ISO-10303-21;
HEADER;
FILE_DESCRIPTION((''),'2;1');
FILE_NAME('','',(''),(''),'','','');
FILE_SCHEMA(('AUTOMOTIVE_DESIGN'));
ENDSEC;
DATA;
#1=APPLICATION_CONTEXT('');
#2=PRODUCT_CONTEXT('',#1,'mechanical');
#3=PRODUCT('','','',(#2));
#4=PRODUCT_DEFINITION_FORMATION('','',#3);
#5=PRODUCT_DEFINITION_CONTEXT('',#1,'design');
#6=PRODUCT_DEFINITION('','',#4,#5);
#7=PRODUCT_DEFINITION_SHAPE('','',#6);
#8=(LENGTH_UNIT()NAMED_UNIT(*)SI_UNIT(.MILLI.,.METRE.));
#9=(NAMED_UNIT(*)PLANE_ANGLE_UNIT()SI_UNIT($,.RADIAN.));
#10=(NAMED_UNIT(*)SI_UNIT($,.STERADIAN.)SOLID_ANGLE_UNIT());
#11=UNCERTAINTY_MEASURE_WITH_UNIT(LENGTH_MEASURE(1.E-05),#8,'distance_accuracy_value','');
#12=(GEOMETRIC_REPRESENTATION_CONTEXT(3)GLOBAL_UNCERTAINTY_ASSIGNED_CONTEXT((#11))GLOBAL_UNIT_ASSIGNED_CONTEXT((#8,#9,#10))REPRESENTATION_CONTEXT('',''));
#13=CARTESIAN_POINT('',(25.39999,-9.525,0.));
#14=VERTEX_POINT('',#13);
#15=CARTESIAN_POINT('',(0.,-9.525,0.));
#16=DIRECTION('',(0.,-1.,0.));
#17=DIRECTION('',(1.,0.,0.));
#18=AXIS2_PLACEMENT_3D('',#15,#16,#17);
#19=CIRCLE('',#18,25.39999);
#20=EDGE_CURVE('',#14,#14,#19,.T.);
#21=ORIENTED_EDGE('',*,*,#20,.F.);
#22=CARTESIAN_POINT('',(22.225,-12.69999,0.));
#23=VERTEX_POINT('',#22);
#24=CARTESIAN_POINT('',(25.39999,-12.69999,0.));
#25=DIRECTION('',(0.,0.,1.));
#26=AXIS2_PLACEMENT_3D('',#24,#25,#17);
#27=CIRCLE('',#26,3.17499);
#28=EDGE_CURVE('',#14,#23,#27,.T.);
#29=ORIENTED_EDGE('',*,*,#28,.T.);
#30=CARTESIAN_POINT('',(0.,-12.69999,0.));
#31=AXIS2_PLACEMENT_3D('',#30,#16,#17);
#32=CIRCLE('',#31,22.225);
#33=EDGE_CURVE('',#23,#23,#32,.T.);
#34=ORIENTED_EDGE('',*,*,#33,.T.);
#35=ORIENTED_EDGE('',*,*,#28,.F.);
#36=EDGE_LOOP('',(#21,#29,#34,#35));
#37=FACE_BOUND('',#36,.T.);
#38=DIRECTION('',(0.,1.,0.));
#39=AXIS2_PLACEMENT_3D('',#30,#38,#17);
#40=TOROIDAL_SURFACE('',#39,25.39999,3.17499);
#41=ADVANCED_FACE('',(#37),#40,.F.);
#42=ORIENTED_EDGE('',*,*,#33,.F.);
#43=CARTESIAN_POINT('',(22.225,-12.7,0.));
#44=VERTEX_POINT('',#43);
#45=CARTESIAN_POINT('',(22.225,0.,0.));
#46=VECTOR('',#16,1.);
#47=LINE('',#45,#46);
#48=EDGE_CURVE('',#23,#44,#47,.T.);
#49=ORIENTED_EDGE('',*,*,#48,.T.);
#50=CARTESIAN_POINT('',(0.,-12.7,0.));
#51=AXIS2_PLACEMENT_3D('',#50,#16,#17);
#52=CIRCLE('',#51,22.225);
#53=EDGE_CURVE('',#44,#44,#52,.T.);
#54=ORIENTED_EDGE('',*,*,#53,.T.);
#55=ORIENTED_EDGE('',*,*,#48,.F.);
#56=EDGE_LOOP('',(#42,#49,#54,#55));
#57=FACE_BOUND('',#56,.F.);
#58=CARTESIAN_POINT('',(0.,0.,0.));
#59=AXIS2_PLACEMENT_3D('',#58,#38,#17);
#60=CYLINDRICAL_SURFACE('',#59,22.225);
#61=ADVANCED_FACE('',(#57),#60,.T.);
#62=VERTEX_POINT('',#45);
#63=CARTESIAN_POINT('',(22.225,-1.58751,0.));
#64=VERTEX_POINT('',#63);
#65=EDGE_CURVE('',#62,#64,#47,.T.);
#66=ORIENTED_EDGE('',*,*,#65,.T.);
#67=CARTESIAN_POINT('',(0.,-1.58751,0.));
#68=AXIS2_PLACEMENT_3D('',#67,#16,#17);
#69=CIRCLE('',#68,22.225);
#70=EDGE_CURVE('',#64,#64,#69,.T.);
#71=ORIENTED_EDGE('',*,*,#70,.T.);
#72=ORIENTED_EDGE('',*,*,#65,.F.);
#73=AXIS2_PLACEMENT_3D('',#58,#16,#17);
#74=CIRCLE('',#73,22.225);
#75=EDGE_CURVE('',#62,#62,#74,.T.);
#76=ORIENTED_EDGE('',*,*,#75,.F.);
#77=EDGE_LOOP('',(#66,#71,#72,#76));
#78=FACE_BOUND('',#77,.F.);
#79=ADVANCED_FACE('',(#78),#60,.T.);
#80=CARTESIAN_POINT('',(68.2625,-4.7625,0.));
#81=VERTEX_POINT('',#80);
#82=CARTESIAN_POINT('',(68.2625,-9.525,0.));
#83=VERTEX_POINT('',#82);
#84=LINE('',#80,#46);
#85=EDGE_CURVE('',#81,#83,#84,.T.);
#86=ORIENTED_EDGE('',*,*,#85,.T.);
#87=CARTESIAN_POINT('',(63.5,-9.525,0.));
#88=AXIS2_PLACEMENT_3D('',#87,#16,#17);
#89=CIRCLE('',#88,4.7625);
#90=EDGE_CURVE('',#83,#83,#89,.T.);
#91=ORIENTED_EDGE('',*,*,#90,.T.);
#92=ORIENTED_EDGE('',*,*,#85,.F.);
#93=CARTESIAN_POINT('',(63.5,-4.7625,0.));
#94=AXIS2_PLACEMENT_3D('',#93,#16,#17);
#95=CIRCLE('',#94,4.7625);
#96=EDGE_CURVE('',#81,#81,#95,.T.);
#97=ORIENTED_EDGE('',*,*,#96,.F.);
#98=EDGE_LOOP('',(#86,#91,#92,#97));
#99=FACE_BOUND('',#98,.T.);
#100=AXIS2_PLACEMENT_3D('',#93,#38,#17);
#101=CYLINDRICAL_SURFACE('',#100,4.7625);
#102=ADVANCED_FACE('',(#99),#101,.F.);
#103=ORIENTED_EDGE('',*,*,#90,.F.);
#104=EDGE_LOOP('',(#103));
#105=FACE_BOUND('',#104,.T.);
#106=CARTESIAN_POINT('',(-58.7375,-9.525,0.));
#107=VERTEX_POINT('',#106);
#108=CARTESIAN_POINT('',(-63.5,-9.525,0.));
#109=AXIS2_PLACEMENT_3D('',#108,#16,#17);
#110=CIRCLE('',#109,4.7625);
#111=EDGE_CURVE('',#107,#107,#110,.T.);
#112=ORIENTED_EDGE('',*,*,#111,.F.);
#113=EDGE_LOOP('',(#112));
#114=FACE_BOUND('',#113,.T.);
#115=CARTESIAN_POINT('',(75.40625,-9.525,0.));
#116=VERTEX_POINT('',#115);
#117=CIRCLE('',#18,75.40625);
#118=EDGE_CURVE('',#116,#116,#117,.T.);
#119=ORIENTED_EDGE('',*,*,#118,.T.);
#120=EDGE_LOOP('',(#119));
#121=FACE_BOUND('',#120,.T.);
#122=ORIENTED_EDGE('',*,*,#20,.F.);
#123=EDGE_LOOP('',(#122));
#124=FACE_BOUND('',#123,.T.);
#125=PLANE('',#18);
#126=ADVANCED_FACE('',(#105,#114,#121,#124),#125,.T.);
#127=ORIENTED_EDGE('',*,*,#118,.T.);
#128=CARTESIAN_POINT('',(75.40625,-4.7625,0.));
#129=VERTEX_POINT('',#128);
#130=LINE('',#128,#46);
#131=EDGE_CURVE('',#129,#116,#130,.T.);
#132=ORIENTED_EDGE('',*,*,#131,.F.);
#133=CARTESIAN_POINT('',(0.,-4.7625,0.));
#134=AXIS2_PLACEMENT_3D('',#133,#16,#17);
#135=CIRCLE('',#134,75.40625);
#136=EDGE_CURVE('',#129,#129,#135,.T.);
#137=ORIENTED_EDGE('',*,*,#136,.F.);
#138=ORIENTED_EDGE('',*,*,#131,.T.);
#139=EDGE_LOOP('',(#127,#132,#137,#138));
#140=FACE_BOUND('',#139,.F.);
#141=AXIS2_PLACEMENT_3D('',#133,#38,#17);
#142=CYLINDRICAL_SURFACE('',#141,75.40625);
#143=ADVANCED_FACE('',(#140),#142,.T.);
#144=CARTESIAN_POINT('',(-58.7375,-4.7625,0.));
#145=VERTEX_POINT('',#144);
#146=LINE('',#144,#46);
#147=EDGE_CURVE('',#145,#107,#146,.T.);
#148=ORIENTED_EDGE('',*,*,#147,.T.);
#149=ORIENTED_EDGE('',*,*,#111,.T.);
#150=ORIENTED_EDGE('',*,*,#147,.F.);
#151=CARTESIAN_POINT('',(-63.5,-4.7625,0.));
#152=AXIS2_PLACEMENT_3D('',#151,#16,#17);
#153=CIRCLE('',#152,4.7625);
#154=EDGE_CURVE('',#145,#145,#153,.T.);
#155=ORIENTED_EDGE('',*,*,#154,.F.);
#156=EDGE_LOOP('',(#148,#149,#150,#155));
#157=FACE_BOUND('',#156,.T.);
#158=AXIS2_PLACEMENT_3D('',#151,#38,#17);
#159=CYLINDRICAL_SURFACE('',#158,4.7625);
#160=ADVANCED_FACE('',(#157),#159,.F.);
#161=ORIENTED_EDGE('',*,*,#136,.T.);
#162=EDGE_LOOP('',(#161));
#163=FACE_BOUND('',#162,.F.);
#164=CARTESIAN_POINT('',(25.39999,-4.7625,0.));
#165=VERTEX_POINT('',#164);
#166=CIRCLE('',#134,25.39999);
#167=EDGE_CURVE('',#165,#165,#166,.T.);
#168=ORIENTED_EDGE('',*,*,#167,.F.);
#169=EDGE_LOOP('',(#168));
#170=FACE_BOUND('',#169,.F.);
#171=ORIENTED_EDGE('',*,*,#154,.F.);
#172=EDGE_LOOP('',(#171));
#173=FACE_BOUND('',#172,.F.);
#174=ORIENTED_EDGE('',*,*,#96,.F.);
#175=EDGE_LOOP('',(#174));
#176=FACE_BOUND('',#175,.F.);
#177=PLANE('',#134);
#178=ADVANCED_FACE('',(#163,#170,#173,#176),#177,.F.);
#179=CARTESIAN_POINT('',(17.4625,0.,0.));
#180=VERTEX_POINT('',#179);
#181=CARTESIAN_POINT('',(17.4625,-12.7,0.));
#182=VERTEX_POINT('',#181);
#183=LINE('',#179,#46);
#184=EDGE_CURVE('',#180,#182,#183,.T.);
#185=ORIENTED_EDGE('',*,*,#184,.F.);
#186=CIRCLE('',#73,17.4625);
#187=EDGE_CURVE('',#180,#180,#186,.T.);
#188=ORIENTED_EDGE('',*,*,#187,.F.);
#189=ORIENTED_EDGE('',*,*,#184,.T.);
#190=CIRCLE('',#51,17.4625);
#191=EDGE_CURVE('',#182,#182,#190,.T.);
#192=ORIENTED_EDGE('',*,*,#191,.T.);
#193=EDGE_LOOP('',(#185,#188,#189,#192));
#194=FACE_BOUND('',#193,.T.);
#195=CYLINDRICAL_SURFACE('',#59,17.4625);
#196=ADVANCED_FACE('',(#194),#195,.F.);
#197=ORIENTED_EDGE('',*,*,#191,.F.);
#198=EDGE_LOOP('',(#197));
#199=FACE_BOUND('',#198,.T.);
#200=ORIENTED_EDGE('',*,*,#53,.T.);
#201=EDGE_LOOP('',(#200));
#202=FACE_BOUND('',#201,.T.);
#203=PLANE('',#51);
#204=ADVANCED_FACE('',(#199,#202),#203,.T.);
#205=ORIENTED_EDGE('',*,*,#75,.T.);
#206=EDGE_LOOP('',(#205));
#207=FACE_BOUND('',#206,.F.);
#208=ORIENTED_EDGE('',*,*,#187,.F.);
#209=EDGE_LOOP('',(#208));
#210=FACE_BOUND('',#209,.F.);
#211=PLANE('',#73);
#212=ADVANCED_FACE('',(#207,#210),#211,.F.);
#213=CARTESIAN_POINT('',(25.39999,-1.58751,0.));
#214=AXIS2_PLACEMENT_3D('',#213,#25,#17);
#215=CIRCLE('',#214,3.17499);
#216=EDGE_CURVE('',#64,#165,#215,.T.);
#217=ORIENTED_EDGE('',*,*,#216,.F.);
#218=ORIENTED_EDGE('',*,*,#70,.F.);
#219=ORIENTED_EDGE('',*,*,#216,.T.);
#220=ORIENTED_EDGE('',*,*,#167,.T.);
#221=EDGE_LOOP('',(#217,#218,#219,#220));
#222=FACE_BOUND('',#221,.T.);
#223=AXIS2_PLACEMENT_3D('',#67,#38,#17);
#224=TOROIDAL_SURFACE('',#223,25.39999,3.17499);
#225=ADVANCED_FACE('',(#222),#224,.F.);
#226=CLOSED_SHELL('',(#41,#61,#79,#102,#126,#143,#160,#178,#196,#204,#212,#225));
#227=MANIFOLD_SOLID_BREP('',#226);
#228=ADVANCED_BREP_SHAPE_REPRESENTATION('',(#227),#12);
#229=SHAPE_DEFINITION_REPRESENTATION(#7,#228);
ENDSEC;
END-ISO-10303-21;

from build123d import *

# Parameters (mm, degrees)
F0_R     = 22.225
F0_R_2   = 17.4625
F1_DEPTH = 12.7
F2_START = 4.7625
F0_R_3   = 75.40625
F0_R_4   = 4.7625
F2_DEPTH = 4.7625
F3_R     = 3.17499


# Not quite as in the source:
# - a fillet or chamfer is up to 0.001 mm smaller than in the source, because OpenCascade refuses the exact size


with BuildPart() as f1:
    # F0 (on Front) → F1 (new body)
    with BuildSketch(Plane.XZ):
        Circle(F0_R)
        Circle(F0_R_2, mode=Mode.SUBTRACT)
    extrude(amount=F1_DEPTH)

    # F0 (on Front) → F2 (join)
    with BuildSketch(Plane.XZ.offset(F2_START)):
        Circle(F0_R_3)
        with Locations((-63.5, 0)):
            Circle(F0_R_4, mode=Mode.SUBTRACT)
        Circle(F0_R, mode=Mode.SUBTRACT)
        with Locations((63.5, 0)):
            Circle(F0_R_4, mode=Mode.SUBTRACT)
    extrude(amount=F2_DEPTH)

    # F3 (radius 3.175 in the source; OpenCascade refuses exactly that, so slightly less here)
    f3_edges = [f1.edges().sort_by_distance(p)[0] for p in [
        (-22.225, -9.525, 0),
        (-22.225, -4.7625, 0),
    ]]
    fillet(f3_edges, radius=F3_R)


solid = f1.part
